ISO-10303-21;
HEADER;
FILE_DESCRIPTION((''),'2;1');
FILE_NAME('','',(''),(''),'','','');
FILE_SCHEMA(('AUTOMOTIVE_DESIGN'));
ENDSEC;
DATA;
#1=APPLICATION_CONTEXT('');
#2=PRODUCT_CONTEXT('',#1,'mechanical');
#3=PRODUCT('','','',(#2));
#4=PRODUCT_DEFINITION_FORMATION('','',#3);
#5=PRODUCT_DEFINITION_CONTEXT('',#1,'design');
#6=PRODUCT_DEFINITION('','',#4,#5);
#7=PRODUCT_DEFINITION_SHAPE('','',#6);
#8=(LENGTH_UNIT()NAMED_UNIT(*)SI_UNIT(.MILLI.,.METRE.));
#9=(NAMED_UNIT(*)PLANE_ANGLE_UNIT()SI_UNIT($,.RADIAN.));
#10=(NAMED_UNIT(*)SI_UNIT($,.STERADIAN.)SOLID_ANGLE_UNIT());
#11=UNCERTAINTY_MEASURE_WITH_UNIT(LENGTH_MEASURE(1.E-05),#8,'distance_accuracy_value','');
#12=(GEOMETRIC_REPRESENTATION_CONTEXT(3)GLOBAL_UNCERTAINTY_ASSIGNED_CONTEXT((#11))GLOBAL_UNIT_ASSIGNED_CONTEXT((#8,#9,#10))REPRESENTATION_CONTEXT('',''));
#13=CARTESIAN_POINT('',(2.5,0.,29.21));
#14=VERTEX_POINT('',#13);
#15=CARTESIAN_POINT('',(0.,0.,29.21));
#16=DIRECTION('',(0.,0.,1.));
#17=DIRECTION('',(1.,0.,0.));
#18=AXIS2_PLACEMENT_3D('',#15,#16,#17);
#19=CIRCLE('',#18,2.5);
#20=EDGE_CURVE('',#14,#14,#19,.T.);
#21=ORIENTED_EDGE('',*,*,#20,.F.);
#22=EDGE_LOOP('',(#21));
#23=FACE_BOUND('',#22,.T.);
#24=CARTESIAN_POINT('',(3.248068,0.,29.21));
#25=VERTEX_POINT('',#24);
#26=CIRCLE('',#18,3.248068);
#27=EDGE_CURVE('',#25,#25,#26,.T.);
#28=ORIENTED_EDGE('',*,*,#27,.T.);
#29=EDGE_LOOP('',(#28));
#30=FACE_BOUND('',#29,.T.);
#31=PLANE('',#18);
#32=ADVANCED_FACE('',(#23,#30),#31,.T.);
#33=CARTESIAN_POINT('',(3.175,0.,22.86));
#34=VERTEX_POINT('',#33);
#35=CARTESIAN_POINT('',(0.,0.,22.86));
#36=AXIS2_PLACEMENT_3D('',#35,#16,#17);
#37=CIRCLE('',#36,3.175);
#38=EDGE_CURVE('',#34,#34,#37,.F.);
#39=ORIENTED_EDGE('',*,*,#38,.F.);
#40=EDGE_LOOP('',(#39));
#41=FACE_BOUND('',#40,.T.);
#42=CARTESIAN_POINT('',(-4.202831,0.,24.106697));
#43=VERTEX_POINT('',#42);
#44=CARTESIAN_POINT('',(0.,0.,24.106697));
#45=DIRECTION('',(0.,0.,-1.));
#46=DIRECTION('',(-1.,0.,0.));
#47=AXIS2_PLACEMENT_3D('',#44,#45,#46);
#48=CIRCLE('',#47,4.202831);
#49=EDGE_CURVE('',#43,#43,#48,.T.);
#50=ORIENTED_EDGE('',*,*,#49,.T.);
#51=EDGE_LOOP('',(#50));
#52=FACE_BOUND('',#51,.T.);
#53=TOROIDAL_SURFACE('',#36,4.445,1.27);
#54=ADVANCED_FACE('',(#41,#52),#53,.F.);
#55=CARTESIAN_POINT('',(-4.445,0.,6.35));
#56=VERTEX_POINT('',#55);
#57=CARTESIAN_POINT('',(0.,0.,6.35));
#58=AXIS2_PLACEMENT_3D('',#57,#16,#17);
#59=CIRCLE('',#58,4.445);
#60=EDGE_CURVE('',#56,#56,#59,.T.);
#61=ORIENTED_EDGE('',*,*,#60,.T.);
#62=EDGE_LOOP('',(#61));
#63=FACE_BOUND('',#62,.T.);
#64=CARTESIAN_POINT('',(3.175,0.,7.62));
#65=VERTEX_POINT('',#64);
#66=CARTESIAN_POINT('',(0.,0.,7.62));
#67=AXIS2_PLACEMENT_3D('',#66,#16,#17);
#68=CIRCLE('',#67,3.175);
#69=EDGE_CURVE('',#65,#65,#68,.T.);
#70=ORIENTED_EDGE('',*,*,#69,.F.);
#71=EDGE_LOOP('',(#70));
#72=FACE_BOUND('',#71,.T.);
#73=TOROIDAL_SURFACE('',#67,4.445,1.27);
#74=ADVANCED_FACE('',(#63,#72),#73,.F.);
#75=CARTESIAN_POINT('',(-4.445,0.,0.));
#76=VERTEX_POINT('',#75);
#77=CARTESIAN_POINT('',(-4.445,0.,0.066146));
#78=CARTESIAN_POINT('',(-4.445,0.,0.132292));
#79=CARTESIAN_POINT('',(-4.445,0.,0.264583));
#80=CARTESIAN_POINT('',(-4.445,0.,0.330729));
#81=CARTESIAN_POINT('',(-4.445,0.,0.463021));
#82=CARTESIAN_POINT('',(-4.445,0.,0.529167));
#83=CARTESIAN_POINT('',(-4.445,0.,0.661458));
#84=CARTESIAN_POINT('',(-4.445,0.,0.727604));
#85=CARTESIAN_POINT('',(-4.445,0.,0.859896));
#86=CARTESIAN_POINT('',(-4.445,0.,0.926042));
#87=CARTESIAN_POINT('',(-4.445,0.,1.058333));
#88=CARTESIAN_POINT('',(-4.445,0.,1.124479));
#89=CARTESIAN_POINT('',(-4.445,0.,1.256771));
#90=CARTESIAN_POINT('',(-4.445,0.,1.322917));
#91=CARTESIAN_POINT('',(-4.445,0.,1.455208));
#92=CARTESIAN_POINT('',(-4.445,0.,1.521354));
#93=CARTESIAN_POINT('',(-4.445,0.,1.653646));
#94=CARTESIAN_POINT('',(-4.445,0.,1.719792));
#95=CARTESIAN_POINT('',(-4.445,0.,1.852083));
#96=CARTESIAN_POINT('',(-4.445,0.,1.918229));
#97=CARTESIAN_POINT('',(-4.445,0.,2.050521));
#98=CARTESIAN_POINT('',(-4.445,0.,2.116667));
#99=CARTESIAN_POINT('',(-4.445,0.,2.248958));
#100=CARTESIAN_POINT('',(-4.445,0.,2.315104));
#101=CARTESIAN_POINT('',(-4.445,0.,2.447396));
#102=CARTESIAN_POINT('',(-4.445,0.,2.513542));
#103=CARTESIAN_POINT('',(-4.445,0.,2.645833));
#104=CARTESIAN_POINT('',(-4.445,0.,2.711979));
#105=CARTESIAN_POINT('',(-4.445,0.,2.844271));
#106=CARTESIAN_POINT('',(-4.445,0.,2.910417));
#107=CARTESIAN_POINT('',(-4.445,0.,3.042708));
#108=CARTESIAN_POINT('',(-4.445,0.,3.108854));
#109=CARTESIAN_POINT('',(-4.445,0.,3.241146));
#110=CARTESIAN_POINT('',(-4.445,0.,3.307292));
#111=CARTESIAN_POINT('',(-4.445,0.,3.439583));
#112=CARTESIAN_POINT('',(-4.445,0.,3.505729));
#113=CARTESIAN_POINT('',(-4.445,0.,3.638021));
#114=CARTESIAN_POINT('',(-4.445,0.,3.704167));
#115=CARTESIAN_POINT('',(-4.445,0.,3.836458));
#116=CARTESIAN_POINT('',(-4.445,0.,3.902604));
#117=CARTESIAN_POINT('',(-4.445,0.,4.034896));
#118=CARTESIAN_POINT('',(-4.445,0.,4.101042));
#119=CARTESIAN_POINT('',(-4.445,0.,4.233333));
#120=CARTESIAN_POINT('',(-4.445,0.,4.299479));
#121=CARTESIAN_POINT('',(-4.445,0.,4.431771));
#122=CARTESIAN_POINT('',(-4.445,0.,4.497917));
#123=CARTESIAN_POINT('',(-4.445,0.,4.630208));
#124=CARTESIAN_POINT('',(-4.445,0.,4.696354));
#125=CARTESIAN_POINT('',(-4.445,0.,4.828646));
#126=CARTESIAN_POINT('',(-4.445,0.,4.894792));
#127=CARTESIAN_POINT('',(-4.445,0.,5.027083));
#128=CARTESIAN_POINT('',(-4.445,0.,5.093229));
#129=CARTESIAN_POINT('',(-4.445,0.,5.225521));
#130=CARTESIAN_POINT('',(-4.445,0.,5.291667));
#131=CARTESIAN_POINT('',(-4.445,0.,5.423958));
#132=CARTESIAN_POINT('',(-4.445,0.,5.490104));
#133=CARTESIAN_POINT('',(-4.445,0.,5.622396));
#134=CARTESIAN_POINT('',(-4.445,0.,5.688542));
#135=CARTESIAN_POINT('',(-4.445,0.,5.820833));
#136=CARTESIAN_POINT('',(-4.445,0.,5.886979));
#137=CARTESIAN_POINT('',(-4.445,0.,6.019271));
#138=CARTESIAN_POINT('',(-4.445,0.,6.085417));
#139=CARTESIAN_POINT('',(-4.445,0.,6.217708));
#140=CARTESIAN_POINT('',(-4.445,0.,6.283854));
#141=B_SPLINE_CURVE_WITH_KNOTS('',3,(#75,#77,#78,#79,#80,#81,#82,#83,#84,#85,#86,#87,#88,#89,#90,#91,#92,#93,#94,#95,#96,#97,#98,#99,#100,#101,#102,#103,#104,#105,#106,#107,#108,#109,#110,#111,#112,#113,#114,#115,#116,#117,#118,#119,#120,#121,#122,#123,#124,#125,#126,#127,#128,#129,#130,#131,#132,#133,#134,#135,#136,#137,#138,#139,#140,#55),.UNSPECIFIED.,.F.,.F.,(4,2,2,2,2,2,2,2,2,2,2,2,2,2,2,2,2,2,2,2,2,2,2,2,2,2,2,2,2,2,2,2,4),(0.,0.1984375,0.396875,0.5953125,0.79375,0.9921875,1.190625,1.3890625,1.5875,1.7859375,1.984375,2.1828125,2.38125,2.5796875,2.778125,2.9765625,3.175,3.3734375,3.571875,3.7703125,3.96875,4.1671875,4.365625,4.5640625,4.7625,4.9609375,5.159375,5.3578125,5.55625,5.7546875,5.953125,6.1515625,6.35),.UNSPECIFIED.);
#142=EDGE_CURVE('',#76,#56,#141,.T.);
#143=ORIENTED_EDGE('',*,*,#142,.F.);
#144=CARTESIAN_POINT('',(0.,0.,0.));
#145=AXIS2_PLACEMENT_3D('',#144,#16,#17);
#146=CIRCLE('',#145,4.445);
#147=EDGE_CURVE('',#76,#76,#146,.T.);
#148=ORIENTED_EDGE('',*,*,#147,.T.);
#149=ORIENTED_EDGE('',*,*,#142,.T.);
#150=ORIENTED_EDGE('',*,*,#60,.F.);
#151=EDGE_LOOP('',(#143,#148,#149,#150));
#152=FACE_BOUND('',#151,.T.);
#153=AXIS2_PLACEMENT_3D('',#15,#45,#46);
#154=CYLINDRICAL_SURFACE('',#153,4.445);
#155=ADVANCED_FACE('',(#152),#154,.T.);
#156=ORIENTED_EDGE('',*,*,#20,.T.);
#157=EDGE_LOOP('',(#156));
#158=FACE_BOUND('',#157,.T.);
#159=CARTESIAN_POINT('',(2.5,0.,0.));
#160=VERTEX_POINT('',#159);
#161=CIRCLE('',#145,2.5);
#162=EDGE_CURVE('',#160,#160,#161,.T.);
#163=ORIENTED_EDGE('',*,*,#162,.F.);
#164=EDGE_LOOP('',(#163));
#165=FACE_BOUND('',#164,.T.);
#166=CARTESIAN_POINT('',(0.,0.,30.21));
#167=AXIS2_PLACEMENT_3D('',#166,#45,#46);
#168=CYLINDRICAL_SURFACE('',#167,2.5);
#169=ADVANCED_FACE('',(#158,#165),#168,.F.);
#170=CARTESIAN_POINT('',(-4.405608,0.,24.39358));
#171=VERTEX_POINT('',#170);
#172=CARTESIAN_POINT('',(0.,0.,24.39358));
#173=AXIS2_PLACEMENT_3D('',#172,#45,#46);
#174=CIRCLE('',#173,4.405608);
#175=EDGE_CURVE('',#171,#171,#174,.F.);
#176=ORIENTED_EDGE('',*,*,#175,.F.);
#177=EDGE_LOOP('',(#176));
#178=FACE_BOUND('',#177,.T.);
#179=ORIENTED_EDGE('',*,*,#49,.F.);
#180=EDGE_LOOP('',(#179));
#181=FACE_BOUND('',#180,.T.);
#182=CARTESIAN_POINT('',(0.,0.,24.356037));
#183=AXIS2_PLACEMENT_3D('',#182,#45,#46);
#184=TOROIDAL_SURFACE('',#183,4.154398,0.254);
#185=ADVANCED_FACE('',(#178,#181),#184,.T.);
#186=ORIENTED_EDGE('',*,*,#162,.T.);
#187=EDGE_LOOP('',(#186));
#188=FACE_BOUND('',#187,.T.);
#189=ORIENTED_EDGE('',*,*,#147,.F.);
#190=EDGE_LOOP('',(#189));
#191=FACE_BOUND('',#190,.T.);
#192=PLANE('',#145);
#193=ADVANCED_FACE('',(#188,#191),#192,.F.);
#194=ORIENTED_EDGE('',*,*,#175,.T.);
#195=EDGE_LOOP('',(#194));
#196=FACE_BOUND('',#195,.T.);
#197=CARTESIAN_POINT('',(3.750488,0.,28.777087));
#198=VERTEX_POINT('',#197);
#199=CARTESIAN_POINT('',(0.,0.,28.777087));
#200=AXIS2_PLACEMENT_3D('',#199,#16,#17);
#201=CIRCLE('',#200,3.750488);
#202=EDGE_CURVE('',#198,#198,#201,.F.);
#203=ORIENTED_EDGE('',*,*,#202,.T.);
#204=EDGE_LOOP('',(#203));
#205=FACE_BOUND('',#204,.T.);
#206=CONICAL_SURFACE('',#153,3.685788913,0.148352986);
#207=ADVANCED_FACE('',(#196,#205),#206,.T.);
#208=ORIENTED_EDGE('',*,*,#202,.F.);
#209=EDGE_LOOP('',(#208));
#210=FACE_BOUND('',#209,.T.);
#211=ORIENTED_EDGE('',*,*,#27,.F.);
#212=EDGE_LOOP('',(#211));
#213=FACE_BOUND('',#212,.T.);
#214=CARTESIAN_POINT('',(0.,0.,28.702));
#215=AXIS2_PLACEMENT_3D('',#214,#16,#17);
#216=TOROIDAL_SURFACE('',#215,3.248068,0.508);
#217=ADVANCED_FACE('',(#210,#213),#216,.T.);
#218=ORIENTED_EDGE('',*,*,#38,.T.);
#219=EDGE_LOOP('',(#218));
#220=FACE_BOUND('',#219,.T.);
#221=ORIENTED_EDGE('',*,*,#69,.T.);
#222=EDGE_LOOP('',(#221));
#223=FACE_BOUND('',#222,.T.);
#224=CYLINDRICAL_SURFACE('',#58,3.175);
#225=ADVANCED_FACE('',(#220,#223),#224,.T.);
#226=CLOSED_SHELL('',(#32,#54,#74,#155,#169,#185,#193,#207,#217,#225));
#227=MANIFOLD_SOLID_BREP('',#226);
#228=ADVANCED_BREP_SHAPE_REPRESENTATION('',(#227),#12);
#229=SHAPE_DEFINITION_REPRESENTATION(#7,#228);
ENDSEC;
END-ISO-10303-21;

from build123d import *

# Parameters (mm, degrees)
SKETCH1_R           = 4.445
BOSS_EXTRUDE1_DEPTH = 29.21
SKETCH2_R           = 2.5
CUT_EXTRUDE1_START  = -5.08
SKETCH3_R           = 6.35
SKETCH3_R_2         = 3.175
CUT_EXTRUDE1_DEPTH  = 17.78
FILLET1_R           = 1.27
FILLET2_R           = 1.27
CHAMFER1_SIZE       = 5.08
CHAMFER1_SIZE_2     = 0.759211087
FILLET3_R           = 0.254
FILLET4_R           = 0.508


# Some blends are built 0.0001 mm under size
with BuildPart() as part:
    # Sketch1 → Boss-Extrude1 (new body)
    with BuildSketch(Plane.XY):
        with Locations(Location((0, 0, 0), (0, 0, 180))):
            Circle(SKETCH1_R)
    extrude(amount=BOSS_EXTRUDE1_DEPTH)

    # Cut-Sweep1: sweep along a curve in space
    with BuildLine() as cut_sweep1_path:
        Line((0, 0, 29.21), (0, 0, 0))
    # Sketch2 → Cut-Sweep1 (sweep, cut)
    with BuildSketch(Plane.XY.offset(29.21)):
        Circle(SKETCH2_R)
    sweep(path=cut_sweep1_path.line, mode=Mode.SUBTRACT)

    # Sketch3 → Cut-Extrude1 (cut)
    with BuildSketch(Plane.XY.offset(29.21).offset(CUT_EXTRUDE1_START)):
        Circle(SKETCH3_R)
        Circle(SKETCH3_R_2, mode=Mode.SUBTRACT)
    extrude(amount=-CUT_EXTRUDE1_DEPTH, mode=Mode.SUBTRACT)

    # Fillet1
    fillet1_edges = [part.edges().sort_by_distance(p)[0] for p in [
        (-3.175, 0, 6.35),
    ]]
    fillet(fillet1_edges, radius=FILLET1_R - 0.0001)  # a hair under: the kernel refuses the full size

    # Fillet2
    fillet2_edges = [part.edges().sort_by_distance(p)[0] for p in [
        (-3.175, 0, 24.13),
    ]]
    fillet(fillet2_edges, radius=FILLET2_R - 0.0001)  # a hair under: the kernel refuses the full size

    # Chamfer1
    # the kernel refuses this chamfer: 5.08, 0.759211087 mm, written as the material it takes off along each edge
    with BuildSketch(Plane(origin=(0, 0, 29.21), x_dir=(-1, 0, 0), z_dir=(0, 1, 0))) as chamfer1_piece_1:
        Polygon((4.445, -CHAMFER1_SIZE), (4.445 - CHAMFER1_SIZE_2, 0), (4.445, 0), align=None)
    revolve(axis=Axis((0, 0, 29.21), (0, 0, 1)), mode=Mode.SUBTRACT)

    # Fillet3
    fillet3_edges = [part.edges().sort_by_distance(p)[0] for p in [
        (4.445, 0, 24.13),
    ]]
    fillet(fillet3_edges, radius=FILLET3_R)

    # Fillet4
    fillet4_edges = [part.edges().sort_by_distance(p)[0] for p in [
        (3.685788913, 0, 29.21),
    ]]
    fillet(fillet4_edges, radius=FILLET4_R)


solid = part.part
